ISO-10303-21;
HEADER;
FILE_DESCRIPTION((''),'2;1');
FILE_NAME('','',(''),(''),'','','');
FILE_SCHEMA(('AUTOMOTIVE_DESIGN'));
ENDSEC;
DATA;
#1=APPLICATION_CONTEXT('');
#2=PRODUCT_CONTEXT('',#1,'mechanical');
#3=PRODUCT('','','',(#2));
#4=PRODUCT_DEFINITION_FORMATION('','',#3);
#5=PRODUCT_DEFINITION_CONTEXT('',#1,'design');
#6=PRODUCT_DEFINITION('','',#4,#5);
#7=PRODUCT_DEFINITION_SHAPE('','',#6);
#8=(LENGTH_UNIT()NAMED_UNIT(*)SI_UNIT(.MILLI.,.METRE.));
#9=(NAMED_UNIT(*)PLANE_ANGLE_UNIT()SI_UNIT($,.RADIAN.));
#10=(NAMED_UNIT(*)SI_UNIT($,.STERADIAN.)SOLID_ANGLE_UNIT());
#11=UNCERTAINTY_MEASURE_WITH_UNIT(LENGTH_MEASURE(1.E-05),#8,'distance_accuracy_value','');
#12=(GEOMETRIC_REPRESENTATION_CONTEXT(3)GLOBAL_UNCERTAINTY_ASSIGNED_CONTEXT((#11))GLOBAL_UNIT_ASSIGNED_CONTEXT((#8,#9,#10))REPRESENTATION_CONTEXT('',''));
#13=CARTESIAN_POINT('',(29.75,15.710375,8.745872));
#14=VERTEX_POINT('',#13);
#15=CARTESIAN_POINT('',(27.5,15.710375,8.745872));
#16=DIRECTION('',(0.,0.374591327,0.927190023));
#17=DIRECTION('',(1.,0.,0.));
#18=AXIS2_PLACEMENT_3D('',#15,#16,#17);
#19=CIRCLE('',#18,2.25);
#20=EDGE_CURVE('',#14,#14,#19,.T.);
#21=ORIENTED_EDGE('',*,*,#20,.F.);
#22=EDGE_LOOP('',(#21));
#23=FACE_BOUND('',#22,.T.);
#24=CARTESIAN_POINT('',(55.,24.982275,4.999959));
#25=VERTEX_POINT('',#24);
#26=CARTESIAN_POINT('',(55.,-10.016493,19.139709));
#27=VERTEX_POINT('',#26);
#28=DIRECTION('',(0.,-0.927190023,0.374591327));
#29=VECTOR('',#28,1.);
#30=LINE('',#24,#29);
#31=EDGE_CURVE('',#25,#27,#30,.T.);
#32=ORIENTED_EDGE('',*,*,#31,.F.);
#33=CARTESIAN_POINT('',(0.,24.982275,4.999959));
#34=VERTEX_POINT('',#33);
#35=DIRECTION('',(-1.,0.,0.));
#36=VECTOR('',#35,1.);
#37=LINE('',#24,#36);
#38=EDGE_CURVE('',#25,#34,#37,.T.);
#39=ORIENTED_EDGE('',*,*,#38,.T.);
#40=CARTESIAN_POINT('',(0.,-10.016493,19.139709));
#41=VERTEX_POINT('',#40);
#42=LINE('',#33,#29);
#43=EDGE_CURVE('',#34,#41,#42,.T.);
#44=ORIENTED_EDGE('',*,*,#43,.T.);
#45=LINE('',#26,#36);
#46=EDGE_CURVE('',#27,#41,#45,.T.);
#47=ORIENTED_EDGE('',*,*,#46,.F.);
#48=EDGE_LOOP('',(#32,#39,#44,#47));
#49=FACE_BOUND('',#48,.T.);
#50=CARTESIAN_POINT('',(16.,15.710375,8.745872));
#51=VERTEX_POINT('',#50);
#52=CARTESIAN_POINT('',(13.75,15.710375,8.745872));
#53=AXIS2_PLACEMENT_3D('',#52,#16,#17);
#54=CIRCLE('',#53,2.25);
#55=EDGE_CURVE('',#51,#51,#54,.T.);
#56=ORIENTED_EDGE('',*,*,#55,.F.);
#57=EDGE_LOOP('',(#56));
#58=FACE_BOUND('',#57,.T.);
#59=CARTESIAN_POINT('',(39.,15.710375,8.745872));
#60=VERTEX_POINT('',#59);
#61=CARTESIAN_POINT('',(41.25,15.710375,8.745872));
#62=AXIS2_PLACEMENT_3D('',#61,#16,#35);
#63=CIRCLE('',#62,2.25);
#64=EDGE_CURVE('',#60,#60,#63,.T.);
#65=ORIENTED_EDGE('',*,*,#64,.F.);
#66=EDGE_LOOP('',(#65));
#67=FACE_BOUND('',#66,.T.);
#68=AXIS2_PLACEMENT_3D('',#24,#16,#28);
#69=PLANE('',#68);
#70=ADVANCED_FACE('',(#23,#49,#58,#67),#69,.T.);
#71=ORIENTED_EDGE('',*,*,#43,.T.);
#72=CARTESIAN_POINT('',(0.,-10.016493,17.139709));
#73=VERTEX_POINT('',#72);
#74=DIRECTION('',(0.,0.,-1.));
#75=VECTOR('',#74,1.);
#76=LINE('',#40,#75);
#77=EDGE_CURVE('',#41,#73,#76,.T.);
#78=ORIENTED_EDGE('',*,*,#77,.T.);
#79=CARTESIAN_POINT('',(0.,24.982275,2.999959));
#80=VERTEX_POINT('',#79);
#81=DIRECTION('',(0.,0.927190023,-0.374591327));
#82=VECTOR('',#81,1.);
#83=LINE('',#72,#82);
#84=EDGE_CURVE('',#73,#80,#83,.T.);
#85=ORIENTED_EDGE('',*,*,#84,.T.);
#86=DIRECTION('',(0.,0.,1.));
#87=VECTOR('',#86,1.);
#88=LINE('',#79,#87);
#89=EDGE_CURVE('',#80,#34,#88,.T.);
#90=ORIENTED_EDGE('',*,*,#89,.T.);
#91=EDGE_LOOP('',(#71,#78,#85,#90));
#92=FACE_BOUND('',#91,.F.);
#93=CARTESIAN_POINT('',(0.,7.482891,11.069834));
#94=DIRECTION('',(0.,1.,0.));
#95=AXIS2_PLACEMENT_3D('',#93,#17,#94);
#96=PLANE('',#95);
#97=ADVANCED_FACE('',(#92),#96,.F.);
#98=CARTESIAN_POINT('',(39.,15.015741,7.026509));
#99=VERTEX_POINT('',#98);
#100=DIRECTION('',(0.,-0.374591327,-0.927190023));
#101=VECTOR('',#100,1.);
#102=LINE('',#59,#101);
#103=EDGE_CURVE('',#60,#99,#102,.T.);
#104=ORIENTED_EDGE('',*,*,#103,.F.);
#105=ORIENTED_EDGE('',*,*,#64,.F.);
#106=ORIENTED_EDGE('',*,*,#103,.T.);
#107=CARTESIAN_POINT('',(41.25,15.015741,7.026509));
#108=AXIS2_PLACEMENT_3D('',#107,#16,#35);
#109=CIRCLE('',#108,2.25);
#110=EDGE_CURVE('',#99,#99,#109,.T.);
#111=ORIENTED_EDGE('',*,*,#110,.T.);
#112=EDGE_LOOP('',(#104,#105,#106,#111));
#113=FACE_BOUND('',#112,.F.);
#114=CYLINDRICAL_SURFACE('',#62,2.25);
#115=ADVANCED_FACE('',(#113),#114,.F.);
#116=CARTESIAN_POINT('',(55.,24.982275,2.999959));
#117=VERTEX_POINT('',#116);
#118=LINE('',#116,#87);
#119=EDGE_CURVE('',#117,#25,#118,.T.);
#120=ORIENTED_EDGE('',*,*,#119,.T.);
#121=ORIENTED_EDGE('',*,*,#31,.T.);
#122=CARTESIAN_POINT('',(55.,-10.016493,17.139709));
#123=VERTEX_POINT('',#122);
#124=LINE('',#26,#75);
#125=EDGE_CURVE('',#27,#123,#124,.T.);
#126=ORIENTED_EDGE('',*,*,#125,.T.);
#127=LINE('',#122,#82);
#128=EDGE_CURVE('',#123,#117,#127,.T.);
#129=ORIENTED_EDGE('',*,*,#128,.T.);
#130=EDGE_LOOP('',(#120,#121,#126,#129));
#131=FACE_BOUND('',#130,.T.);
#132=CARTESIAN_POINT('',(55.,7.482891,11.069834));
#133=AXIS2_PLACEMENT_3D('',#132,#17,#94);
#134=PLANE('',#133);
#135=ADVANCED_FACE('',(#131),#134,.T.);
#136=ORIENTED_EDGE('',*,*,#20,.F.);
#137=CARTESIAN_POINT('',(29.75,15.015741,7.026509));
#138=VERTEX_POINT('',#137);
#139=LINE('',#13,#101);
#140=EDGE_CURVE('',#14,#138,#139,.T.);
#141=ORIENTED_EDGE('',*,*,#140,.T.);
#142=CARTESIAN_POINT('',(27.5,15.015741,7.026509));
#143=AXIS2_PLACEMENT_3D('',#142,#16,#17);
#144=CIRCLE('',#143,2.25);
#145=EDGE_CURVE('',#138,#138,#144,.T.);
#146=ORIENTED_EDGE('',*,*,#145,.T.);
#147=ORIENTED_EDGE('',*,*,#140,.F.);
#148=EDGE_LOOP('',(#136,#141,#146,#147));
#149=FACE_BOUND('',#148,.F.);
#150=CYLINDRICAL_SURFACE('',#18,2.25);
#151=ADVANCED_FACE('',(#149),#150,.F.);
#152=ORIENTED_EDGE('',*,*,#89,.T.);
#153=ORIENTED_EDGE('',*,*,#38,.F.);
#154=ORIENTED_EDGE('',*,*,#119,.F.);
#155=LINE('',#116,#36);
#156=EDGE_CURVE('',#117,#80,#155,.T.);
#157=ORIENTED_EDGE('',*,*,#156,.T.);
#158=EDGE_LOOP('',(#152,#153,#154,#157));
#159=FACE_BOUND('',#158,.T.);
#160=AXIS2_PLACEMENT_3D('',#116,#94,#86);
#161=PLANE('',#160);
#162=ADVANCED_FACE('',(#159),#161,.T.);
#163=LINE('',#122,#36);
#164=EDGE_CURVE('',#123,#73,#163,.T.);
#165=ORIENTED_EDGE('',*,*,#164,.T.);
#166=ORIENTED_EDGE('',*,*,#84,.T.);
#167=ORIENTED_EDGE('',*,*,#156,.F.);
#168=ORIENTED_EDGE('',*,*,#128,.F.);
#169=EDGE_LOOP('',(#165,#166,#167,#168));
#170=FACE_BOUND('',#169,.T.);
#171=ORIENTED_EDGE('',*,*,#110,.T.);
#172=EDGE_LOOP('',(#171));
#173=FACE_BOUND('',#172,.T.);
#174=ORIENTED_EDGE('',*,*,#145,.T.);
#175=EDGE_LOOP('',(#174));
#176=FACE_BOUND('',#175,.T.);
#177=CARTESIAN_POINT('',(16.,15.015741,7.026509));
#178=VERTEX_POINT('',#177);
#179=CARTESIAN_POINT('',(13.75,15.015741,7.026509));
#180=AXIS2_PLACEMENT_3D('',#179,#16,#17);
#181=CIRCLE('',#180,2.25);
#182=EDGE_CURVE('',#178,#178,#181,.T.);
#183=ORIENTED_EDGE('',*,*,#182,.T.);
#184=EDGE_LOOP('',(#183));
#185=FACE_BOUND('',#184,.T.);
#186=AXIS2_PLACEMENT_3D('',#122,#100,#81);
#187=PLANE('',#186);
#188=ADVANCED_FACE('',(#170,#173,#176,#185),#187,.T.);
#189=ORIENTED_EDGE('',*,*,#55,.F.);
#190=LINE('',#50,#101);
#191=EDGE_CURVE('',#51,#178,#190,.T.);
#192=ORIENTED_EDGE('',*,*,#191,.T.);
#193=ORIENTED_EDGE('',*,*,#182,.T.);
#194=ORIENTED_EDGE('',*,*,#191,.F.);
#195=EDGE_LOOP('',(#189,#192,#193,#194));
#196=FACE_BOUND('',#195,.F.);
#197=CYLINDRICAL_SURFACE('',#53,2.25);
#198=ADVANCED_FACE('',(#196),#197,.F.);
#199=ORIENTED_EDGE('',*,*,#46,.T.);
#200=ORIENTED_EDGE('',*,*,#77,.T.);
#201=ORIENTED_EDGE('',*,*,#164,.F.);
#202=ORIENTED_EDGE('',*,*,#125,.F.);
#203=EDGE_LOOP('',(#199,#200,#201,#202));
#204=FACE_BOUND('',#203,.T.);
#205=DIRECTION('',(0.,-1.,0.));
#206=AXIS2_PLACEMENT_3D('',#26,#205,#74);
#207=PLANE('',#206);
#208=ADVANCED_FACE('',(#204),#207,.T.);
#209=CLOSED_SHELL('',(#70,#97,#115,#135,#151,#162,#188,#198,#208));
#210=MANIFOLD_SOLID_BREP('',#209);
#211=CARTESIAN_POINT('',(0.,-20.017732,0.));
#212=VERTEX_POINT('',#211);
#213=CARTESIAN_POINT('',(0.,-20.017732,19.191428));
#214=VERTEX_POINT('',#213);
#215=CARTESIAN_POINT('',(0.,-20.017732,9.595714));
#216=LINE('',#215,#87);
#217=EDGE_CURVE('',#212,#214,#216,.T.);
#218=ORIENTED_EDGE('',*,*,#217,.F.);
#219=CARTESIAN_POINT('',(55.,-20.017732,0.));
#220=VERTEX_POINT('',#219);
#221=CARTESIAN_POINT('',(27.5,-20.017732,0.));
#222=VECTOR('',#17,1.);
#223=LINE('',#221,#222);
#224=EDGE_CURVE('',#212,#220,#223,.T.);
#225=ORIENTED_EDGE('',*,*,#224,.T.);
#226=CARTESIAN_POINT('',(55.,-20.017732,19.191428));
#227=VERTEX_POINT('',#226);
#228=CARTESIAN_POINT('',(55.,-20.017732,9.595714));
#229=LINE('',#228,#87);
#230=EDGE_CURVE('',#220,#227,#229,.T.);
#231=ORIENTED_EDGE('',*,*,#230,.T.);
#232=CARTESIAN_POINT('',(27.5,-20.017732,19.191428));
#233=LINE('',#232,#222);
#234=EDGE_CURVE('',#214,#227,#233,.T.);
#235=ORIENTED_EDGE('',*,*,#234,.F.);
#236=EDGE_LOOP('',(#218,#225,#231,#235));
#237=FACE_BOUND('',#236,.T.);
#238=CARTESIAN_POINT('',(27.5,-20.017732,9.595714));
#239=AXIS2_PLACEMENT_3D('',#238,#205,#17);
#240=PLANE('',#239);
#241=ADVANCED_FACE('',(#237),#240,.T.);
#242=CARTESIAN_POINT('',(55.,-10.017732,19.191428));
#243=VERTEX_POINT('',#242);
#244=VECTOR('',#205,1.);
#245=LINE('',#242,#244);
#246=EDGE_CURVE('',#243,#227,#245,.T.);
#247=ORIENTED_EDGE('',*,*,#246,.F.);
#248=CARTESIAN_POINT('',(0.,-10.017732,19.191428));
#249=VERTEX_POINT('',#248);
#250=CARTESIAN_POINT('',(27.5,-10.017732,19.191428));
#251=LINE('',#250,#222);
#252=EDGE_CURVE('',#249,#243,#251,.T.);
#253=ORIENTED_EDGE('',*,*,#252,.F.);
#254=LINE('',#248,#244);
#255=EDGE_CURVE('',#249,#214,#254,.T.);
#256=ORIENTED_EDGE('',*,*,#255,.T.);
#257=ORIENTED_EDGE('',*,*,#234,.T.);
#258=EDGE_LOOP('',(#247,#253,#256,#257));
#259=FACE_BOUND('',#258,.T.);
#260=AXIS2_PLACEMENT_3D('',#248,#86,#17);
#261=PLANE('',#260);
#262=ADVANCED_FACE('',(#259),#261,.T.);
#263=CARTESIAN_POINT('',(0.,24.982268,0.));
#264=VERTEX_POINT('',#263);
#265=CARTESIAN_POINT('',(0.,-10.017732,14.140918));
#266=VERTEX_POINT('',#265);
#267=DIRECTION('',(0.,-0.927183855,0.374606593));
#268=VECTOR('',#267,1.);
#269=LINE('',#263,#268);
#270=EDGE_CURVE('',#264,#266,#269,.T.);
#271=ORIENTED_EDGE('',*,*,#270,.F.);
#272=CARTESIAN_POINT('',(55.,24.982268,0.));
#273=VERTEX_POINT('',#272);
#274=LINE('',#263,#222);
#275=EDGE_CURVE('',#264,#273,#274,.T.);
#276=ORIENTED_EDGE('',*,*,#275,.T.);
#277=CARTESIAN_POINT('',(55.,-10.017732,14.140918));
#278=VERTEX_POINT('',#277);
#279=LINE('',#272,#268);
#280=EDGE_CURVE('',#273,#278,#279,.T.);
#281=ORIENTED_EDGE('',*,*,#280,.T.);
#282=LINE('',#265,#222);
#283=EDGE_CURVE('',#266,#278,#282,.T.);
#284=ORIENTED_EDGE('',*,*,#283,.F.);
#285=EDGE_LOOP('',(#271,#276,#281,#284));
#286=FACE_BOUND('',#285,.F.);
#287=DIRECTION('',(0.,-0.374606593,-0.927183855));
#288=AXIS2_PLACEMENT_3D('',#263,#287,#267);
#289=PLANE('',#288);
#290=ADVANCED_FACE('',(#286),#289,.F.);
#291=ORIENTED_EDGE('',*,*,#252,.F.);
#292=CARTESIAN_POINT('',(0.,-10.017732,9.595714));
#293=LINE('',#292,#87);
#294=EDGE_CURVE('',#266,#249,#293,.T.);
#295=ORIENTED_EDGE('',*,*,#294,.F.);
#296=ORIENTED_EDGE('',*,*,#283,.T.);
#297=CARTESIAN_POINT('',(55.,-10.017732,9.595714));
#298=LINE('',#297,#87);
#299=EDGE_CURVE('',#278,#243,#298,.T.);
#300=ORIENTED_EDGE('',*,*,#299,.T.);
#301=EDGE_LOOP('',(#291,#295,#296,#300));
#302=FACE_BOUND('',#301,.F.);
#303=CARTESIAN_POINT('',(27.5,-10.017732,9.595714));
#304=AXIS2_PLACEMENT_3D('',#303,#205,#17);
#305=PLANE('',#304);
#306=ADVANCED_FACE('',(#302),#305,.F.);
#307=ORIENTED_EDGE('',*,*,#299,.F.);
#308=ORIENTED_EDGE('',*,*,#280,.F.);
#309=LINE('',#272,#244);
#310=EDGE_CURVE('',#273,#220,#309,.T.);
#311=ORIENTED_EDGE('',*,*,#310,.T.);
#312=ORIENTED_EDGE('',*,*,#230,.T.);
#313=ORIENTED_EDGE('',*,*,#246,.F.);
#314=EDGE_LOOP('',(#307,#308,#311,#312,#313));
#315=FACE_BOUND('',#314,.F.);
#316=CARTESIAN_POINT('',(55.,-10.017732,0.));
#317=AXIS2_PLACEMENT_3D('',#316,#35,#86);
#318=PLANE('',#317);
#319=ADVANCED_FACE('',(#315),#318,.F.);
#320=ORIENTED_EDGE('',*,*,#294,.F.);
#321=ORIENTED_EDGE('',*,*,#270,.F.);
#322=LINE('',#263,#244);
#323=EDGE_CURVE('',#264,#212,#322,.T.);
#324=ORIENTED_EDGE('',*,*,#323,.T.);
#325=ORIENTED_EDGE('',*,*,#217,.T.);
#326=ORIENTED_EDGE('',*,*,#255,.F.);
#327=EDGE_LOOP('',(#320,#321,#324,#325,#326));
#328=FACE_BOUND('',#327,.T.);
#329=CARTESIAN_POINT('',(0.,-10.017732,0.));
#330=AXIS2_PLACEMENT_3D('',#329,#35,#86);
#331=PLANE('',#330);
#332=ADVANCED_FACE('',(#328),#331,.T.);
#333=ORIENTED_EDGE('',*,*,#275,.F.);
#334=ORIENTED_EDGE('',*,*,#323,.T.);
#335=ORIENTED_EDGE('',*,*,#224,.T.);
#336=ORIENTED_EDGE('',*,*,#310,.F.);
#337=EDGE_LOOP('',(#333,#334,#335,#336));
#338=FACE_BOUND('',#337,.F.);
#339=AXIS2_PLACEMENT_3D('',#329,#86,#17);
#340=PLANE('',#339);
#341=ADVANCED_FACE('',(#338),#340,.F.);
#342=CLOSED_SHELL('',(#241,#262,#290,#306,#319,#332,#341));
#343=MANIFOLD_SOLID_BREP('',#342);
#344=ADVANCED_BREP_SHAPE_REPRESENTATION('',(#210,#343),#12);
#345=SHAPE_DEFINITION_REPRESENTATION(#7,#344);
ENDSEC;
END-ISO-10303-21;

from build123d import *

# Parameters (mm, degrees)
F1_DEPTH = 55
F5_DEPTH = 55
F6_W     = 55
F6_H     = 19.191428078
F7_DEPTH = 10
F8_R     = 2.25
F9_DEPTH = 25


with BuildPart() as f1:
    # F0 (on Right) → F1 (new body)
    with BuildSketch(Plane.YZ):
        Polygon((24.9822678417, 0), (-10.0177321583, 14.1409179042), (-10.0177321583, 0), align=None)
    extrude(amount=F1_DEPTH)

    # F6 (on face) → F7 (join)
    with BuildSketch(Plane.XZ.offset(10.0177321583)):
        with Locations((27.5, 9.595714039)):
            Rectangle(F6_W, F6_H)
    extrude(amount=F7_DEPTH)


with BuildPart() as f5:
    # F4 (on face) → F5 (new body)
    with BuildSketch(Plane.YZ.offset(55)):
        Polygon((-10.016492568, 19.1397086233), (-10.016492568, 17.1397086233), (24.9822754413, 2.9999588151), (24.9822754413, 4.9999588151), align=None)
    extrude(amount=-F5_DEPTH)

    # F8 (on face) → F9 (cut)
    with BuildSketch(Plane(origin=(0, 5.242051865, 12.9751487547), x_dir=(1, 0, 0), z_dir=(0, 0.3745913268, 0.9271900225))):
        with Locations((13.75, 11.2903753235)):
            Circle(F8_R)
        with BuildLine():
            ThreePointArc((25.25, 11.2903753235), (27.5, 9.0403753235), (29.75, 11.2903753235))
            Line((29.75, 11.2903753235), (27.5, 11.2903753235))
            Line((27.5, 11.2903753235), (25.25, 11.2903753235))
        make_face()
        with BuildLine():
            Line((27.5, 11.2903753235), (29.75, 11.2903753235))
            ThreePointArc((29.75, 11.2903753235), (27.5, 13.5403753235), (25.25, 11.2903753235))
            Line((25.25, 11.2903753235), (27.5, 11.2903753235))
        make_face()
        with BuildLine():
            ThreePointArc((43.5, 11.2903753235), (41.25, 13.5403753235), (39, 11.2903753235))
            ThreePointArc((39, 11.2903753235), (41.25, 9.0403753235), (43.5, 11.2903753235))
        make_face()
    extrude(amount=-F9_DEPTH, mode=Mode.SUBTRACT)


solid = Compound([f1.part, f5.part])
